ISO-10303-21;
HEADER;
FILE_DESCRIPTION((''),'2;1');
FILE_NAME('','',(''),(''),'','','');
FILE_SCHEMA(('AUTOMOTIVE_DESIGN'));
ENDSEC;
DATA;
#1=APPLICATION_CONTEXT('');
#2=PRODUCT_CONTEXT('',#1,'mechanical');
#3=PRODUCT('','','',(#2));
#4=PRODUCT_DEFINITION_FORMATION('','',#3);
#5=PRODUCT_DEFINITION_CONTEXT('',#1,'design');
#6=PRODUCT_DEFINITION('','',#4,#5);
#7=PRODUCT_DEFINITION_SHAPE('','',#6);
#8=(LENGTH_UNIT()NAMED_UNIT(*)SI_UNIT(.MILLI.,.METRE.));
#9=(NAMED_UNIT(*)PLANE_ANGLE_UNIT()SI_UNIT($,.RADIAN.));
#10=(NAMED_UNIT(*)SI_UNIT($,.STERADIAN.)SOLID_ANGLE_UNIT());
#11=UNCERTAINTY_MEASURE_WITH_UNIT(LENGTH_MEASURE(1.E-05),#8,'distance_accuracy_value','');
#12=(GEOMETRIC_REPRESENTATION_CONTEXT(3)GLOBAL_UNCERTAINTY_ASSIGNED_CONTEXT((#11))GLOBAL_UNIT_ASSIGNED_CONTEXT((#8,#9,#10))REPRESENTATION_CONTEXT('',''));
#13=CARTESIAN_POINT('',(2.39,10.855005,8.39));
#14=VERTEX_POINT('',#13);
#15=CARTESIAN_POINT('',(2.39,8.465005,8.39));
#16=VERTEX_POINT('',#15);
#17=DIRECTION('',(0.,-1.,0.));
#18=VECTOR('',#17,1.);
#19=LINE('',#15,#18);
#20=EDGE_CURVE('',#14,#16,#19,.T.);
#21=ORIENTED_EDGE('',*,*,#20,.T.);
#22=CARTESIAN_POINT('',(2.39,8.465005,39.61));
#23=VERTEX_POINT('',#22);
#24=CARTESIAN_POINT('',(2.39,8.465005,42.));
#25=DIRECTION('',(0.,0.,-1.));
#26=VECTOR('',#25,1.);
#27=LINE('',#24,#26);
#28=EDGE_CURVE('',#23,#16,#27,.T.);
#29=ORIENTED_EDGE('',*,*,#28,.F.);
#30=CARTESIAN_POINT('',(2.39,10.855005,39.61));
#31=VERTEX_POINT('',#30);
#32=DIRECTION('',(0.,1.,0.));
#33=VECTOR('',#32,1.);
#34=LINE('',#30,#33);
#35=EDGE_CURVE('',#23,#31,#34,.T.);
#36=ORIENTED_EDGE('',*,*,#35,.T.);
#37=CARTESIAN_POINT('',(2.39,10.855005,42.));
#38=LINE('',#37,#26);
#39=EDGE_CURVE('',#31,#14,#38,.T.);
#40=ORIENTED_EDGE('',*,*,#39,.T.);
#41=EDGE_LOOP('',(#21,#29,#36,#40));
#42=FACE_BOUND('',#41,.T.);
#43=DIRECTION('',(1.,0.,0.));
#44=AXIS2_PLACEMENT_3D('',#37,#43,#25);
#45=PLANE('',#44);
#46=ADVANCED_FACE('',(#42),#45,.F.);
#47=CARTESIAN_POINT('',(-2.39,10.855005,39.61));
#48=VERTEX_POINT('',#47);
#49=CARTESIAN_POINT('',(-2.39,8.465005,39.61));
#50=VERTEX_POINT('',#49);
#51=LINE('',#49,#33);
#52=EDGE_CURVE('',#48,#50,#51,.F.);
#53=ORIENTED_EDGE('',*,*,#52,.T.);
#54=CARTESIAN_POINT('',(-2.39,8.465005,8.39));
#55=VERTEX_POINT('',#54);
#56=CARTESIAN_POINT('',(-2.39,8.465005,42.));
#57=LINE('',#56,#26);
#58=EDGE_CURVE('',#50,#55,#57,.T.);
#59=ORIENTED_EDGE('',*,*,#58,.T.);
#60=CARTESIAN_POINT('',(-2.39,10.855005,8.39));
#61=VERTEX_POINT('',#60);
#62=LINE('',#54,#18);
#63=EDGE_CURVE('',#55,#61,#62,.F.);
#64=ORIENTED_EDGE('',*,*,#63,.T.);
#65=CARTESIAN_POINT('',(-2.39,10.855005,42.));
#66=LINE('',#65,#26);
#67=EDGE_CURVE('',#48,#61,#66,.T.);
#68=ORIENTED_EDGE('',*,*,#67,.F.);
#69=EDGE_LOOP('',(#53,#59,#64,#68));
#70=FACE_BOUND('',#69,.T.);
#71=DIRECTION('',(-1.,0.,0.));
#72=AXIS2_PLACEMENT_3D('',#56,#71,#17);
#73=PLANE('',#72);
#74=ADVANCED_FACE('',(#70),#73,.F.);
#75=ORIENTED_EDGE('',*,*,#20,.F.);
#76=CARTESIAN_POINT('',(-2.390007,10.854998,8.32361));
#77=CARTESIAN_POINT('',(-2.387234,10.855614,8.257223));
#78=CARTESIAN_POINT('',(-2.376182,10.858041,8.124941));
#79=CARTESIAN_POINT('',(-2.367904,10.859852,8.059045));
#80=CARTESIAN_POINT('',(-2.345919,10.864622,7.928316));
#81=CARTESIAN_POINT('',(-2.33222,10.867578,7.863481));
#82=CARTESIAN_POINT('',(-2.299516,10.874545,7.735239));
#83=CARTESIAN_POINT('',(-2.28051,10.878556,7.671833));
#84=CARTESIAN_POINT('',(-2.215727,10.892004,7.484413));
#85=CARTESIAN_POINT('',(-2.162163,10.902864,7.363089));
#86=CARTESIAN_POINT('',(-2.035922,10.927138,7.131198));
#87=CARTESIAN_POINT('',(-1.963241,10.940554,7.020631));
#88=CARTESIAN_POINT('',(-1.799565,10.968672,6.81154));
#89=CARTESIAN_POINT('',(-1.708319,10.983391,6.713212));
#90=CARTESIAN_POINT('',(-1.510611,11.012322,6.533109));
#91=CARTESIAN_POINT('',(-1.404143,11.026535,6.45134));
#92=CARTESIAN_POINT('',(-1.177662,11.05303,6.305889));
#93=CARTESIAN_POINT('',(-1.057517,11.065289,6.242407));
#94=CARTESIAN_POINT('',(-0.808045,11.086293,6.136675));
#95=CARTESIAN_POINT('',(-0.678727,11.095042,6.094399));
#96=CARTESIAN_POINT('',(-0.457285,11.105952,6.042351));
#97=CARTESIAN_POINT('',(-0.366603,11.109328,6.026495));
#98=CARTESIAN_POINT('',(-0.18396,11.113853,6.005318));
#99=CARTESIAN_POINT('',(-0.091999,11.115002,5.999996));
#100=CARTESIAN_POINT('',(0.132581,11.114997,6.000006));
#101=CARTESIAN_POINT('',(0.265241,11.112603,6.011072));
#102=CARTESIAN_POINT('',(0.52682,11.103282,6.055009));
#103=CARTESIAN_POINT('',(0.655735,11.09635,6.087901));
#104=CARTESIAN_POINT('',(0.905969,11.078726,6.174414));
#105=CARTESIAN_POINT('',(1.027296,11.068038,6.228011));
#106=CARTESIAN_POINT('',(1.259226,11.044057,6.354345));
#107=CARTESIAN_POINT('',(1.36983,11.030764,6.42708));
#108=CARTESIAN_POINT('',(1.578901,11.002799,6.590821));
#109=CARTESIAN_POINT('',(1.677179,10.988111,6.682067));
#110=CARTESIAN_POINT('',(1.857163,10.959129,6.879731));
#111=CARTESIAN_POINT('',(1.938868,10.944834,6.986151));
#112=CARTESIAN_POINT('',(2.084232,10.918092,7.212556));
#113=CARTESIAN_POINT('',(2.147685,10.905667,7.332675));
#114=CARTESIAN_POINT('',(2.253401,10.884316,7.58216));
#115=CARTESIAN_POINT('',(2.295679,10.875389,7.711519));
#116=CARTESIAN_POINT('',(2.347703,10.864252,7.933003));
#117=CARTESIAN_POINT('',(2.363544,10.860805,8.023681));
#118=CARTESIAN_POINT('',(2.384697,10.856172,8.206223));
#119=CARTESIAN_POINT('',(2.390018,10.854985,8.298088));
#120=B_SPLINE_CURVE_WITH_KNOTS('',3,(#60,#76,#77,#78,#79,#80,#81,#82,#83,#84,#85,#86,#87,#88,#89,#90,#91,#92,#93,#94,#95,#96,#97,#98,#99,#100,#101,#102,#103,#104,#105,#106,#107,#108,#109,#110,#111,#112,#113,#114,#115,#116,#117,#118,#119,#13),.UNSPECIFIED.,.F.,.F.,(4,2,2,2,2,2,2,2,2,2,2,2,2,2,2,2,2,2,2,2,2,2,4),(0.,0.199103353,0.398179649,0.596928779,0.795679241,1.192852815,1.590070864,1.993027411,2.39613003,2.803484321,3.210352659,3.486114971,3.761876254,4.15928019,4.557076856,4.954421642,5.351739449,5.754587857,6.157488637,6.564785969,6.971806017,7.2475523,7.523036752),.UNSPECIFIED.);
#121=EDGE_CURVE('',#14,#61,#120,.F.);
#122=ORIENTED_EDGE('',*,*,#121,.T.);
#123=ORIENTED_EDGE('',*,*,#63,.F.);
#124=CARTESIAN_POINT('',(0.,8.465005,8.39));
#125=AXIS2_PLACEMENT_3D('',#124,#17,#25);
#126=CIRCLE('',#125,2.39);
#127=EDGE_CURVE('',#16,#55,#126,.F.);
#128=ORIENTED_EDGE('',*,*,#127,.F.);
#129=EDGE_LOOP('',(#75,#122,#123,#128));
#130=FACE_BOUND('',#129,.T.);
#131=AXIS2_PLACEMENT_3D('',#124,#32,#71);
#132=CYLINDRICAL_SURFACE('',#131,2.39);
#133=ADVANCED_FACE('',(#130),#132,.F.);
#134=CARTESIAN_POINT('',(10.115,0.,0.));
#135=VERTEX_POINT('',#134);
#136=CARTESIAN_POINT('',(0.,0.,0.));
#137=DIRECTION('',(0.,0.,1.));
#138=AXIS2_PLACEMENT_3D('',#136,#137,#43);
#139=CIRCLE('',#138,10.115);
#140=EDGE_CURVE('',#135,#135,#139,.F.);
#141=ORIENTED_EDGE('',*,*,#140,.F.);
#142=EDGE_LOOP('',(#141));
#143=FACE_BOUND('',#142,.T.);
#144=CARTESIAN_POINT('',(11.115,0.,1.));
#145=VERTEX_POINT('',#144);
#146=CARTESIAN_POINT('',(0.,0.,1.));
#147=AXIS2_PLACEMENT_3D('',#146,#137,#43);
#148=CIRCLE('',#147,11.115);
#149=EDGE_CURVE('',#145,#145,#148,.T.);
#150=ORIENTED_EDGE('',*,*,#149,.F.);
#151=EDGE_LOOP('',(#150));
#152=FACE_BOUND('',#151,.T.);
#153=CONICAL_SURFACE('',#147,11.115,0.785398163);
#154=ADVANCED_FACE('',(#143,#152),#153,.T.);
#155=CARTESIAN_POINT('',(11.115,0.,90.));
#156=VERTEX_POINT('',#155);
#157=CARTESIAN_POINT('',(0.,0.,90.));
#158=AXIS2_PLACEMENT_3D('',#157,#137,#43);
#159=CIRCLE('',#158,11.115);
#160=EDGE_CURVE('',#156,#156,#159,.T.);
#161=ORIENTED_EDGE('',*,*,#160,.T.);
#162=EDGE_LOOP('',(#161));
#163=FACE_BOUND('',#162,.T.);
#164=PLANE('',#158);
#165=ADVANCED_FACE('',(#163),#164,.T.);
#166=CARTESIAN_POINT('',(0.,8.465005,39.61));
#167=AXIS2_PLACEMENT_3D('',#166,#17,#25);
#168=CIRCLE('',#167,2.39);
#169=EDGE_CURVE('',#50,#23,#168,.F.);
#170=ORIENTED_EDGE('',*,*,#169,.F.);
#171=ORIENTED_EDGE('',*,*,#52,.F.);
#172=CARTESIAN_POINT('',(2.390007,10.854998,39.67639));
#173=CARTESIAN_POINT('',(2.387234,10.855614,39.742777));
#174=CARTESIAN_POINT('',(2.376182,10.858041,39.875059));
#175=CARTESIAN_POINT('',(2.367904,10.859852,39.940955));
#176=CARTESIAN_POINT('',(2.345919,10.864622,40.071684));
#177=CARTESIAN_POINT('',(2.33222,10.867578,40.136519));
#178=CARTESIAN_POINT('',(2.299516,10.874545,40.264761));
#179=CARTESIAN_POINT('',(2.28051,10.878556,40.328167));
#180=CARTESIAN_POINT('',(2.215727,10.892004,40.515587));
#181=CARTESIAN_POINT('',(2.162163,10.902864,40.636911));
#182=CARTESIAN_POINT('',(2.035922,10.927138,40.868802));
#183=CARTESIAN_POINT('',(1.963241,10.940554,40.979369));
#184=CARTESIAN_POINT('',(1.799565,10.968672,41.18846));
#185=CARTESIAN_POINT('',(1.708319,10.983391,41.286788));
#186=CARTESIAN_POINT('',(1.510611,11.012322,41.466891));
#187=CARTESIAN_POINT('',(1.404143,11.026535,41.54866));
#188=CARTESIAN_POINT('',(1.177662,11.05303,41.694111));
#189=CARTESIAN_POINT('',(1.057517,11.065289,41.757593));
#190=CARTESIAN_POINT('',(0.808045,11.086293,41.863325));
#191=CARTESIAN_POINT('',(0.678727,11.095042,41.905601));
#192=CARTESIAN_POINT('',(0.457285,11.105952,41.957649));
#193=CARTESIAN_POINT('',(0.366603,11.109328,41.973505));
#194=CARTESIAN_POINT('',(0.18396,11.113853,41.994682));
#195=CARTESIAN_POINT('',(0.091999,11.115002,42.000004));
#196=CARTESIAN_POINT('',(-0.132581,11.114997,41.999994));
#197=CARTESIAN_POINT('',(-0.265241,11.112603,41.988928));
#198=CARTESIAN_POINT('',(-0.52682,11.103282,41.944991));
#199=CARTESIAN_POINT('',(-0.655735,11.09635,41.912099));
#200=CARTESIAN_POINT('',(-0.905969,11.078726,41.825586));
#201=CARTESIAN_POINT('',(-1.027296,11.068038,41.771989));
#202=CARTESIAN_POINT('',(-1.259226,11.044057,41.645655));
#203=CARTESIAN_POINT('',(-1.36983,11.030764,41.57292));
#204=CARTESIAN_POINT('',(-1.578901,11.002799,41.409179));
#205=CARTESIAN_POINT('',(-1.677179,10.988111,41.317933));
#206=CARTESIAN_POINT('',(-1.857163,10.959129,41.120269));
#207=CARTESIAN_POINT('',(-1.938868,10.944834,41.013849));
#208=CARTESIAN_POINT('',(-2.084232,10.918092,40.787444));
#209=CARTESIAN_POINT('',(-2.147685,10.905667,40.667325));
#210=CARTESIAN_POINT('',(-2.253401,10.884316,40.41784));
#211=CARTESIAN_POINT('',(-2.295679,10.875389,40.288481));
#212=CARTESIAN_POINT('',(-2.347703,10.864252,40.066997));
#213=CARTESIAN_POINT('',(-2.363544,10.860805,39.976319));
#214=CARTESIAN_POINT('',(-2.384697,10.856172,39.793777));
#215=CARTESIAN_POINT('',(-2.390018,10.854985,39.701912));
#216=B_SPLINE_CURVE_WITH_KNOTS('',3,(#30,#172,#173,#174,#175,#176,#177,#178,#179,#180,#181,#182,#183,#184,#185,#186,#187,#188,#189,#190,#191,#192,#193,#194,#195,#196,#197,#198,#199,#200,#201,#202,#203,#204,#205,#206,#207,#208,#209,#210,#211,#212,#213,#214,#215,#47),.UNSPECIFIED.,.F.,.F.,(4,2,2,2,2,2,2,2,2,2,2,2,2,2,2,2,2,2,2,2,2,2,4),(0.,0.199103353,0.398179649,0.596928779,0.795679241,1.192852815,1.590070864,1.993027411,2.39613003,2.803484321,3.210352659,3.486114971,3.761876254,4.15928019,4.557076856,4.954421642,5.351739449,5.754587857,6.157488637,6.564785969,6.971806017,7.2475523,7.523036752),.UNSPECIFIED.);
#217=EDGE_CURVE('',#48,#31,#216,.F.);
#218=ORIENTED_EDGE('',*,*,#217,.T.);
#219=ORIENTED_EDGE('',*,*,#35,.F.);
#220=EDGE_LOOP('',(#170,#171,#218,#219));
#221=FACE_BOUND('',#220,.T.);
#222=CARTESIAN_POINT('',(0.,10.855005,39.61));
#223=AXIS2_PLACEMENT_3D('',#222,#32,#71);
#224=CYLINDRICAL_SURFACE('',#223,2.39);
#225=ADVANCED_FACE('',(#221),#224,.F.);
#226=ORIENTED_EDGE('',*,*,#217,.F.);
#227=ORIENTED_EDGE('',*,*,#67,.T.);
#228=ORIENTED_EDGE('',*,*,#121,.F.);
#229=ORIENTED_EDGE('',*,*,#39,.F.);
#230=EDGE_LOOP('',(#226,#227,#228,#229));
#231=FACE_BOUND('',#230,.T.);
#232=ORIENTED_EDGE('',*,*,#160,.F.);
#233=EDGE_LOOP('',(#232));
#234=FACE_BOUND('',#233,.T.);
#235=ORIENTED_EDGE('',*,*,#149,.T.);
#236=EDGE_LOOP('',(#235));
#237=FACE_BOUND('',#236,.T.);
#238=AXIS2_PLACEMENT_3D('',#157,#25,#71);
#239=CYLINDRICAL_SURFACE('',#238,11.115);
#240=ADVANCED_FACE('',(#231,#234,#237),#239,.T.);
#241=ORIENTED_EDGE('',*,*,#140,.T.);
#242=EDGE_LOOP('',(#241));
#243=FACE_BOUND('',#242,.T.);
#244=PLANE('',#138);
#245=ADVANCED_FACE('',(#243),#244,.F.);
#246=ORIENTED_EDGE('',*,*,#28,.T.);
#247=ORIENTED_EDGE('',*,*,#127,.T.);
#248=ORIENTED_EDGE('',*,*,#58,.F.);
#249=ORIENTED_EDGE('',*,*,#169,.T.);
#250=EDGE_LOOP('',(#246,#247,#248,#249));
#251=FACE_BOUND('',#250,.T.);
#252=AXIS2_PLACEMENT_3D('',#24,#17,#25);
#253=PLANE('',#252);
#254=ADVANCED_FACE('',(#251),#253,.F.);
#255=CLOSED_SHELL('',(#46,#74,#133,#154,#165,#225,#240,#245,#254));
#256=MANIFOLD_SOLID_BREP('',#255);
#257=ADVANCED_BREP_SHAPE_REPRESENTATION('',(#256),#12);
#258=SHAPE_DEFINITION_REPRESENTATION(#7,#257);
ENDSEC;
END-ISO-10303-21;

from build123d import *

# Parameters (mm, degrees)
SZKIC1_R                    = 11.115
DODANIE_WYCI_GNI_CIE1_DEPTH = 90
SFAZOWANIE1_SIZE            = 1
WYTNIJ_WYCI_GNI_CIE1_DEPTH  = 36
ZAOKR_GLENIE1_R             = 2.39
ZAOKR_GLENIE2_R             = 2.39


with BuildPart() as part:
    # Szkic1 → Dodanie-wyciągnięcie1 (new body)
    with BuildSketch(Plane.XY):
        with Locations(Location((0, 0, 0), (0, 0, 180))):
            Circle(SZKIC1_R)
    extrude(amount=DODANIE_WYCI_GNI_CIE1_DEPTH)

    # Sfazowanie1
    sfazowanie1_edges = [part.edges().sort_by_distance(p)[0] for p in [
        (11.115, 0, 0),
    ]]
    chamfer(sfazowanie1_edges, length=SFAZOWANIE1_SIZE)

    # Szkic2 → Wytnij-wyciągnięcie1 (cut)
    with BuildSketch(Plane(origin=(0, 0, 6), x_dir=(-1, 0, 0), z_dir=(0, 0, -1))):
        with BuildLine():
            Line((-2.39, 10.855004606), (-2.39, 8.465004606))
            Line((-2.39, 8.465004606), (2.39, 8.465004606))
            Line((2.39, 8.465004606), (2.39, 10.855004606))
            ThreePointArc((2.39, 10.855004606), (0, 11.115), (-2.39, 10.855004606))
        make_face()
    extrude(amount=-WYTNIJ_WYCI_GNI_CIE1_DEPTH, mode=Mode.SUBTRACT)

    # Zaokrąglenie1
    zaokr_glenie1_edges = [part.edges().sort_by_distance(p)[0] for p in [
        (-2.39, 9.660004606, 42),
        (2.39, 9.660004606, 42),
    ]]
    fillet(zaokr_glenie1_edges, radius=ZAOKR_GLENIE1_R - 0.0001)  # a hair under: the kernel refuses the full size

    # Zaokrąglenie2
    zaokr_glenie2_edges = [part.edges().sort_by_distance(p)[0] for p in [
        (2.39, 9.660004606, 6),
        (-2.39, 9.660004606, 6),
    ]]
    fillet(zaokr_glenie2_edges, radius=ZAOKR_GLENIE2_R - 0.0001)  # a hair under: the kernel refuses the full size


solid = part.part
